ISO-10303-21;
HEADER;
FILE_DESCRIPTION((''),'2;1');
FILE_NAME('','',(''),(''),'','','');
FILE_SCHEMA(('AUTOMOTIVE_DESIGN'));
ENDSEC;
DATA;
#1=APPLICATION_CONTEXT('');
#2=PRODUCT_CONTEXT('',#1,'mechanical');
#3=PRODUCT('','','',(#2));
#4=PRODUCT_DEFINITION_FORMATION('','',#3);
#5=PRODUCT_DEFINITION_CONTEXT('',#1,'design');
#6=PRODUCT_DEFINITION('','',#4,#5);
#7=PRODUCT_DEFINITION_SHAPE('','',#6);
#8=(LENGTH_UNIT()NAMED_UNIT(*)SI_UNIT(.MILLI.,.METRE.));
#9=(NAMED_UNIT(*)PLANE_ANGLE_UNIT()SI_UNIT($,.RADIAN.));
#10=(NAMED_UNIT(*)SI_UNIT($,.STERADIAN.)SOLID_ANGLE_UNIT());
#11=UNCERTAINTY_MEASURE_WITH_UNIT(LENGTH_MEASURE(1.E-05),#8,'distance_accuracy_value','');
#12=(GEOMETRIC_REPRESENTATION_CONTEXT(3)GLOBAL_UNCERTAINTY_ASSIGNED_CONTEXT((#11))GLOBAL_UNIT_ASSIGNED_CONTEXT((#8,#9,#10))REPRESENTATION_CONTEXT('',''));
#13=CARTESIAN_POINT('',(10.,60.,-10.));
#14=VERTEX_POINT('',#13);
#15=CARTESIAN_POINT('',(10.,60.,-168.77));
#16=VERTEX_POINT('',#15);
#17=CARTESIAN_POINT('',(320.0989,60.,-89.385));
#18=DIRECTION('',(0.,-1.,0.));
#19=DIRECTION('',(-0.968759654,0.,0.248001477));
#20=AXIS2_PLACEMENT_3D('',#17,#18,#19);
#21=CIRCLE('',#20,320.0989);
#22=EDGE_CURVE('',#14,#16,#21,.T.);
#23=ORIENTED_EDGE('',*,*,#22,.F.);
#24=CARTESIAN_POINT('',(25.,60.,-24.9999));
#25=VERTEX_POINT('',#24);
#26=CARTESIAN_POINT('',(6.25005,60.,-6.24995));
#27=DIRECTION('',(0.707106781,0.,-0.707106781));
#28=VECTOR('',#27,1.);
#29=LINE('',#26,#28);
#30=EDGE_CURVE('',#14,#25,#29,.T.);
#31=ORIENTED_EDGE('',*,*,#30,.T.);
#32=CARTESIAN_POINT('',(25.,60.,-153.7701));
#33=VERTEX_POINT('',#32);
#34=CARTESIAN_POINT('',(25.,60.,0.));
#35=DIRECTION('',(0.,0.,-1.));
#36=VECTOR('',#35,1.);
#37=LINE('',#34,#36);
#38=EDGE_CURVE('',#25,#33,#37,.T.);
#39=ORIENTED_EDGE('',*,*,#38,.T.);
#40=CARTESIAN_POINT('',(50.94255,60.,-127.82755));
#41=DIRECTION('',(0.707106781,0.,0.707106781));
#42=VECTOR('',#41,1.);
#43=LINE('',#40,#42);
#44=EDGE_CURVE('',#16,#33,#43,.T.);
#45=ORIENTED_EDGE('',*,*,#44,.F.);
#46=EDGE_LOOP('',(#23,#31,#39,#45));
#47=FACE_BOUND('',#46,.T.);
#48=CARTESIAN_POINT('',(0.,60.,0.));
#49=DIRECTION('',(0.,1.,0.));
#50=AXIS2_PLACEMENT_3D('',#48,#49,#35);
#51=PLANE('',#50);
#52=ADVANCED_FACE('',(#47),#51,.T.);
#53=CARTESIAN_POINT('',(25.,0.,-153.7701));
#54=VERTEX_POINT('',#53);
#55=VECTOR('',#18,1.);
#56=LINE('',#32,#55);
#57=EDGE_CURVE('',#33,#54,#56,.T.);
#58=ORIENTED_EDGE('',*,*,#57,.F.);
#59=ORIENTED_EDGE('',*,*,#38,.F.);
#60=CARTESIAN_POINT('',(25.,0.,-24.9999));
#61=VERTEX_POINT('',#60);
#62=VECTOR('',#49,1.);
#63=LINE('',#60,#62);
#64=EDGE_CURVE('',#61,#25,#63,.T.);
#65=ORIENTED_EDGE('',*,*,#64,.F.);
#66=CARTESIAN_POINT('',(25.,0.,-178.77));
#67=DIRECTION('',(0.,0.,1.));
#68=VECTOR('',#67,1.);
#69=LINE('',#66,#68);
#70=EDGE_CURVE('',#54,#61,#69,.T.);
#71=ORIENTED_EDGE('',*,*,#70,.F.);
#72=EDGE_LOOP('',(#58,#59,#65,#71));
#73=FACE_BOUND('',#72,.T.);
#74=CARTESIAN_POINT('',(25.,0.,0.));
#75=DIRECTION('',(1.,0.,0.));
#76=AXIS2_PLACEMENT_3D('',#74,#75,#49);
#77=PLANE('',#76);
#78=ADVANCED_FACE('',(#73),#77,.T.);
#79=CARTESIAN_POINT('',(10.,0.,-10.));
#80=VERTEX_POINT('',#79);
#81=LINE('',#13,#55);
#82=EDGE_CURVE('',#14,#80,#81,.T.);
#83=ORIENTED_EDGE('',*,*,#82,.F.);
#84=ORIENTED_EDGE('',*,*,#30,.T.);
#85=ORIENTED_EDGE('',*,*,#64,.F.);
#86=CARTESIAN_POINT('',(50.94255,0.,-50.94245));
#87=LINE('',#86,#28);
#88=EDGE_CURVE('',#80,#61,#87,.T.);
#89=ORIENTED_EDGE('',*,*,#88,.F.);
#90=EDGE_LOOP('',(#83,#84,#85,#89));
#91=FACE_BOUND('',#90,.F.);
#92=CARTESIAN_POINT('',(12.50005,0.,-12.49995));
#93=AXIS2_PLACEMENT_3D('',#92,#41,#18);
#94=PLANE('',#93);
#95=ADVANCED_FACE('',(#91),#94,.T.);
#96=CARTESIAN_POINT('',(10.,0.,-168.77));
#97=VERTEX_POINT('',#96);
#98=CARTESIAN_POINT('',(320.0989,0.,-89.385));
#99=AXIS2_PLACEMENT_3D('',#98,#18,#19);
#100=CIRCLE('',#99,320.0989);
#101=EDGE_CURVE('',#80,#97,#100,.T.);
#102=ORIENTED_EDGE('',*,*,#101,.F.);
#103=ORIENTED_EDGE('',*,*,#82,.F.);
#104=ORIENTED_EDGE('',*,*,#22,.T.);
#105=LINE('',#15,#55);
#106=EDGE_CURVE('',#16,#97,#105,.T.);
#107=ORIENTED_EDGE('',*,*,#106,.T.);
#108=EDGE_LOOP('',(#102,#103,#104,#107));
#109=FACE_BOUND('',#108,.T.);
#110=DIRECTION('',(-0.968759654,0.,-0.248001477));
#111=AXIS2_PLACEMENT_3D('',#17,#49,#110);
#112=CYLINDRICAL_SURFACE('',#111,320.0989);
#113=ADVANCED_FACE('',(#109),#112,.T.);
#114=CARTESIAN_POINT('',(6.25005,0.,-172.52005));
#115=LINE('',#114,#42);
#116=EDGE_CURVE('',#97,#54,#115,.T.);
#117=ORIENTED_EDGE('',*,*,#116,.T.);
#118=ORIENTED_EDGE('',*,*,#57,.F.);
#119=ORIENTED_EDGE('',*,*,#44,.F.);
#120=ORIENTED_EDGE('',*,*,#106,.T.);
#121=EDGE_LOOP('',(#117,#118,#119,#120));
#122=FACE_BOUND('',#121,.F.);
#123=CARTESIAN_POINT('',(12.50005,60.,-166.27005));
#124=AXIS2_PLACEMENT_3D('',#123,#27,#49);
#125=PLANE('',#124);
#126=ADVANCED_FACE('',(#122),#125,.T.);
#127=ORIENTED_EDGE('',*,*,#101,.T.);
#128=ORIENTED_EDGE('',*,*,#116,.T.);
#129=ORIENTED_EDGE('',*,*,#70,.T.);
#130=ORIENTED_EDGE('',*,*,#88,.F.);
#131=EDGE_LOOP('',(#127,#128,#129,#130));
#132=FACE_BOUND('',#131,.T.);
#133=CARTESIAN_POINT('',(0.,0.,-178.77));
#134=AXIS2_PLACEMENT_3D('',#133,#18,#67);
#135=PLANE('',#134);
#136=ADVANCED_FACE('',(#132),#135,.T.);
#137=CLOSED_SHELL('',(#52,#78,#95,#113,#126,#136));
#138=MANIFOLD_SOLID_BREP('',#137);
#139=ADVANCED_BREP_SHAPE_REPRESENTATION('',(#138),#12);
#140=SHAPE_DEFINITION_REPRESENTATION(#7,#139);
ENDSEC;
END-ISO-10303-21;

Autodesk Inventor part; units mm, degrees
ref_plane "YZ Plane" through (0, 0, 0) normal (1, 0, 0) x (0, 1, 0)
ref_plane "XZ Plane" through (0, 0, 0) normal (0, 1, 0) x (-1, 0, 0)
ref_plane "XY Plane" through (0, 0, 0) normal (0, 0, 1) x (1, 0, 0)
sketch "Эскиз1" plane through (0, 0, 0) normal (1, 0, 0) x (0, 1, 0)
  line L0 (0, 0) -> (60, 0)
  line L1 (60, 0) -> (60, -178.77)
  line L2 (60, -178.77) -> (0, -178.77)
  line L3 (0, -178.77) -> (0, 0)
  dimension "d0" = 60
  dimension "d1" = 178.77
extrude "Выдавливание1" add sketch "Эскиз1" along normal blind 25
chamfer "Фаска1" distance 25 angle 45 2 edges at (25, 30, 0) (25, 30, -178.77)
sketch "Эскиз2" plane through (0, 60, 0) normal (0, 1, 0) x (1, 0, 0)
  line L0 (25, 153.77) -> (3.5, 175.27) projected
  arc A0 (10, 168.77) -> (10, 10) centre (320.0989, 89.385) ccw
  line L1 (0, 0) -> (0, 178.77) projected
  line L2 (0, 89.385) -> (124.8295, 89.385)
  line L3 (25, 25) -> (0, 0) projected
  arc A1 (25, 153.77) -> (25, 25) centre (320.0989, 89.385) ccw
  line L4 (0, 178.77) -> (25, 153.77) projected
  line L5 (0, 0) -> (0, 178.77) projected
  line L6 (25, 25) -> (0, 0) projected
  line L7 (25, 153.77) -> (25, 25) projected
  line L8 (10, 10) -> (0, 0)
  line L9 (0, 0) -> (0, 89.385)
  line L10 (0, 89.385) -> (0, 178.77)
  line L11 (10, 168.77) -> (0, 178.77)
  line L12 (25, 153.77) -> (25, 25)
  point P0 (7, 178.77)
  dimension "d7" = 10
extrude "Выдавливание2" cut sketch "Эскиз2" against normal blind 60 contours A0 L1 L4 L0 | A0 L3 L1
properties part number "Short" material "Красное дерево"
